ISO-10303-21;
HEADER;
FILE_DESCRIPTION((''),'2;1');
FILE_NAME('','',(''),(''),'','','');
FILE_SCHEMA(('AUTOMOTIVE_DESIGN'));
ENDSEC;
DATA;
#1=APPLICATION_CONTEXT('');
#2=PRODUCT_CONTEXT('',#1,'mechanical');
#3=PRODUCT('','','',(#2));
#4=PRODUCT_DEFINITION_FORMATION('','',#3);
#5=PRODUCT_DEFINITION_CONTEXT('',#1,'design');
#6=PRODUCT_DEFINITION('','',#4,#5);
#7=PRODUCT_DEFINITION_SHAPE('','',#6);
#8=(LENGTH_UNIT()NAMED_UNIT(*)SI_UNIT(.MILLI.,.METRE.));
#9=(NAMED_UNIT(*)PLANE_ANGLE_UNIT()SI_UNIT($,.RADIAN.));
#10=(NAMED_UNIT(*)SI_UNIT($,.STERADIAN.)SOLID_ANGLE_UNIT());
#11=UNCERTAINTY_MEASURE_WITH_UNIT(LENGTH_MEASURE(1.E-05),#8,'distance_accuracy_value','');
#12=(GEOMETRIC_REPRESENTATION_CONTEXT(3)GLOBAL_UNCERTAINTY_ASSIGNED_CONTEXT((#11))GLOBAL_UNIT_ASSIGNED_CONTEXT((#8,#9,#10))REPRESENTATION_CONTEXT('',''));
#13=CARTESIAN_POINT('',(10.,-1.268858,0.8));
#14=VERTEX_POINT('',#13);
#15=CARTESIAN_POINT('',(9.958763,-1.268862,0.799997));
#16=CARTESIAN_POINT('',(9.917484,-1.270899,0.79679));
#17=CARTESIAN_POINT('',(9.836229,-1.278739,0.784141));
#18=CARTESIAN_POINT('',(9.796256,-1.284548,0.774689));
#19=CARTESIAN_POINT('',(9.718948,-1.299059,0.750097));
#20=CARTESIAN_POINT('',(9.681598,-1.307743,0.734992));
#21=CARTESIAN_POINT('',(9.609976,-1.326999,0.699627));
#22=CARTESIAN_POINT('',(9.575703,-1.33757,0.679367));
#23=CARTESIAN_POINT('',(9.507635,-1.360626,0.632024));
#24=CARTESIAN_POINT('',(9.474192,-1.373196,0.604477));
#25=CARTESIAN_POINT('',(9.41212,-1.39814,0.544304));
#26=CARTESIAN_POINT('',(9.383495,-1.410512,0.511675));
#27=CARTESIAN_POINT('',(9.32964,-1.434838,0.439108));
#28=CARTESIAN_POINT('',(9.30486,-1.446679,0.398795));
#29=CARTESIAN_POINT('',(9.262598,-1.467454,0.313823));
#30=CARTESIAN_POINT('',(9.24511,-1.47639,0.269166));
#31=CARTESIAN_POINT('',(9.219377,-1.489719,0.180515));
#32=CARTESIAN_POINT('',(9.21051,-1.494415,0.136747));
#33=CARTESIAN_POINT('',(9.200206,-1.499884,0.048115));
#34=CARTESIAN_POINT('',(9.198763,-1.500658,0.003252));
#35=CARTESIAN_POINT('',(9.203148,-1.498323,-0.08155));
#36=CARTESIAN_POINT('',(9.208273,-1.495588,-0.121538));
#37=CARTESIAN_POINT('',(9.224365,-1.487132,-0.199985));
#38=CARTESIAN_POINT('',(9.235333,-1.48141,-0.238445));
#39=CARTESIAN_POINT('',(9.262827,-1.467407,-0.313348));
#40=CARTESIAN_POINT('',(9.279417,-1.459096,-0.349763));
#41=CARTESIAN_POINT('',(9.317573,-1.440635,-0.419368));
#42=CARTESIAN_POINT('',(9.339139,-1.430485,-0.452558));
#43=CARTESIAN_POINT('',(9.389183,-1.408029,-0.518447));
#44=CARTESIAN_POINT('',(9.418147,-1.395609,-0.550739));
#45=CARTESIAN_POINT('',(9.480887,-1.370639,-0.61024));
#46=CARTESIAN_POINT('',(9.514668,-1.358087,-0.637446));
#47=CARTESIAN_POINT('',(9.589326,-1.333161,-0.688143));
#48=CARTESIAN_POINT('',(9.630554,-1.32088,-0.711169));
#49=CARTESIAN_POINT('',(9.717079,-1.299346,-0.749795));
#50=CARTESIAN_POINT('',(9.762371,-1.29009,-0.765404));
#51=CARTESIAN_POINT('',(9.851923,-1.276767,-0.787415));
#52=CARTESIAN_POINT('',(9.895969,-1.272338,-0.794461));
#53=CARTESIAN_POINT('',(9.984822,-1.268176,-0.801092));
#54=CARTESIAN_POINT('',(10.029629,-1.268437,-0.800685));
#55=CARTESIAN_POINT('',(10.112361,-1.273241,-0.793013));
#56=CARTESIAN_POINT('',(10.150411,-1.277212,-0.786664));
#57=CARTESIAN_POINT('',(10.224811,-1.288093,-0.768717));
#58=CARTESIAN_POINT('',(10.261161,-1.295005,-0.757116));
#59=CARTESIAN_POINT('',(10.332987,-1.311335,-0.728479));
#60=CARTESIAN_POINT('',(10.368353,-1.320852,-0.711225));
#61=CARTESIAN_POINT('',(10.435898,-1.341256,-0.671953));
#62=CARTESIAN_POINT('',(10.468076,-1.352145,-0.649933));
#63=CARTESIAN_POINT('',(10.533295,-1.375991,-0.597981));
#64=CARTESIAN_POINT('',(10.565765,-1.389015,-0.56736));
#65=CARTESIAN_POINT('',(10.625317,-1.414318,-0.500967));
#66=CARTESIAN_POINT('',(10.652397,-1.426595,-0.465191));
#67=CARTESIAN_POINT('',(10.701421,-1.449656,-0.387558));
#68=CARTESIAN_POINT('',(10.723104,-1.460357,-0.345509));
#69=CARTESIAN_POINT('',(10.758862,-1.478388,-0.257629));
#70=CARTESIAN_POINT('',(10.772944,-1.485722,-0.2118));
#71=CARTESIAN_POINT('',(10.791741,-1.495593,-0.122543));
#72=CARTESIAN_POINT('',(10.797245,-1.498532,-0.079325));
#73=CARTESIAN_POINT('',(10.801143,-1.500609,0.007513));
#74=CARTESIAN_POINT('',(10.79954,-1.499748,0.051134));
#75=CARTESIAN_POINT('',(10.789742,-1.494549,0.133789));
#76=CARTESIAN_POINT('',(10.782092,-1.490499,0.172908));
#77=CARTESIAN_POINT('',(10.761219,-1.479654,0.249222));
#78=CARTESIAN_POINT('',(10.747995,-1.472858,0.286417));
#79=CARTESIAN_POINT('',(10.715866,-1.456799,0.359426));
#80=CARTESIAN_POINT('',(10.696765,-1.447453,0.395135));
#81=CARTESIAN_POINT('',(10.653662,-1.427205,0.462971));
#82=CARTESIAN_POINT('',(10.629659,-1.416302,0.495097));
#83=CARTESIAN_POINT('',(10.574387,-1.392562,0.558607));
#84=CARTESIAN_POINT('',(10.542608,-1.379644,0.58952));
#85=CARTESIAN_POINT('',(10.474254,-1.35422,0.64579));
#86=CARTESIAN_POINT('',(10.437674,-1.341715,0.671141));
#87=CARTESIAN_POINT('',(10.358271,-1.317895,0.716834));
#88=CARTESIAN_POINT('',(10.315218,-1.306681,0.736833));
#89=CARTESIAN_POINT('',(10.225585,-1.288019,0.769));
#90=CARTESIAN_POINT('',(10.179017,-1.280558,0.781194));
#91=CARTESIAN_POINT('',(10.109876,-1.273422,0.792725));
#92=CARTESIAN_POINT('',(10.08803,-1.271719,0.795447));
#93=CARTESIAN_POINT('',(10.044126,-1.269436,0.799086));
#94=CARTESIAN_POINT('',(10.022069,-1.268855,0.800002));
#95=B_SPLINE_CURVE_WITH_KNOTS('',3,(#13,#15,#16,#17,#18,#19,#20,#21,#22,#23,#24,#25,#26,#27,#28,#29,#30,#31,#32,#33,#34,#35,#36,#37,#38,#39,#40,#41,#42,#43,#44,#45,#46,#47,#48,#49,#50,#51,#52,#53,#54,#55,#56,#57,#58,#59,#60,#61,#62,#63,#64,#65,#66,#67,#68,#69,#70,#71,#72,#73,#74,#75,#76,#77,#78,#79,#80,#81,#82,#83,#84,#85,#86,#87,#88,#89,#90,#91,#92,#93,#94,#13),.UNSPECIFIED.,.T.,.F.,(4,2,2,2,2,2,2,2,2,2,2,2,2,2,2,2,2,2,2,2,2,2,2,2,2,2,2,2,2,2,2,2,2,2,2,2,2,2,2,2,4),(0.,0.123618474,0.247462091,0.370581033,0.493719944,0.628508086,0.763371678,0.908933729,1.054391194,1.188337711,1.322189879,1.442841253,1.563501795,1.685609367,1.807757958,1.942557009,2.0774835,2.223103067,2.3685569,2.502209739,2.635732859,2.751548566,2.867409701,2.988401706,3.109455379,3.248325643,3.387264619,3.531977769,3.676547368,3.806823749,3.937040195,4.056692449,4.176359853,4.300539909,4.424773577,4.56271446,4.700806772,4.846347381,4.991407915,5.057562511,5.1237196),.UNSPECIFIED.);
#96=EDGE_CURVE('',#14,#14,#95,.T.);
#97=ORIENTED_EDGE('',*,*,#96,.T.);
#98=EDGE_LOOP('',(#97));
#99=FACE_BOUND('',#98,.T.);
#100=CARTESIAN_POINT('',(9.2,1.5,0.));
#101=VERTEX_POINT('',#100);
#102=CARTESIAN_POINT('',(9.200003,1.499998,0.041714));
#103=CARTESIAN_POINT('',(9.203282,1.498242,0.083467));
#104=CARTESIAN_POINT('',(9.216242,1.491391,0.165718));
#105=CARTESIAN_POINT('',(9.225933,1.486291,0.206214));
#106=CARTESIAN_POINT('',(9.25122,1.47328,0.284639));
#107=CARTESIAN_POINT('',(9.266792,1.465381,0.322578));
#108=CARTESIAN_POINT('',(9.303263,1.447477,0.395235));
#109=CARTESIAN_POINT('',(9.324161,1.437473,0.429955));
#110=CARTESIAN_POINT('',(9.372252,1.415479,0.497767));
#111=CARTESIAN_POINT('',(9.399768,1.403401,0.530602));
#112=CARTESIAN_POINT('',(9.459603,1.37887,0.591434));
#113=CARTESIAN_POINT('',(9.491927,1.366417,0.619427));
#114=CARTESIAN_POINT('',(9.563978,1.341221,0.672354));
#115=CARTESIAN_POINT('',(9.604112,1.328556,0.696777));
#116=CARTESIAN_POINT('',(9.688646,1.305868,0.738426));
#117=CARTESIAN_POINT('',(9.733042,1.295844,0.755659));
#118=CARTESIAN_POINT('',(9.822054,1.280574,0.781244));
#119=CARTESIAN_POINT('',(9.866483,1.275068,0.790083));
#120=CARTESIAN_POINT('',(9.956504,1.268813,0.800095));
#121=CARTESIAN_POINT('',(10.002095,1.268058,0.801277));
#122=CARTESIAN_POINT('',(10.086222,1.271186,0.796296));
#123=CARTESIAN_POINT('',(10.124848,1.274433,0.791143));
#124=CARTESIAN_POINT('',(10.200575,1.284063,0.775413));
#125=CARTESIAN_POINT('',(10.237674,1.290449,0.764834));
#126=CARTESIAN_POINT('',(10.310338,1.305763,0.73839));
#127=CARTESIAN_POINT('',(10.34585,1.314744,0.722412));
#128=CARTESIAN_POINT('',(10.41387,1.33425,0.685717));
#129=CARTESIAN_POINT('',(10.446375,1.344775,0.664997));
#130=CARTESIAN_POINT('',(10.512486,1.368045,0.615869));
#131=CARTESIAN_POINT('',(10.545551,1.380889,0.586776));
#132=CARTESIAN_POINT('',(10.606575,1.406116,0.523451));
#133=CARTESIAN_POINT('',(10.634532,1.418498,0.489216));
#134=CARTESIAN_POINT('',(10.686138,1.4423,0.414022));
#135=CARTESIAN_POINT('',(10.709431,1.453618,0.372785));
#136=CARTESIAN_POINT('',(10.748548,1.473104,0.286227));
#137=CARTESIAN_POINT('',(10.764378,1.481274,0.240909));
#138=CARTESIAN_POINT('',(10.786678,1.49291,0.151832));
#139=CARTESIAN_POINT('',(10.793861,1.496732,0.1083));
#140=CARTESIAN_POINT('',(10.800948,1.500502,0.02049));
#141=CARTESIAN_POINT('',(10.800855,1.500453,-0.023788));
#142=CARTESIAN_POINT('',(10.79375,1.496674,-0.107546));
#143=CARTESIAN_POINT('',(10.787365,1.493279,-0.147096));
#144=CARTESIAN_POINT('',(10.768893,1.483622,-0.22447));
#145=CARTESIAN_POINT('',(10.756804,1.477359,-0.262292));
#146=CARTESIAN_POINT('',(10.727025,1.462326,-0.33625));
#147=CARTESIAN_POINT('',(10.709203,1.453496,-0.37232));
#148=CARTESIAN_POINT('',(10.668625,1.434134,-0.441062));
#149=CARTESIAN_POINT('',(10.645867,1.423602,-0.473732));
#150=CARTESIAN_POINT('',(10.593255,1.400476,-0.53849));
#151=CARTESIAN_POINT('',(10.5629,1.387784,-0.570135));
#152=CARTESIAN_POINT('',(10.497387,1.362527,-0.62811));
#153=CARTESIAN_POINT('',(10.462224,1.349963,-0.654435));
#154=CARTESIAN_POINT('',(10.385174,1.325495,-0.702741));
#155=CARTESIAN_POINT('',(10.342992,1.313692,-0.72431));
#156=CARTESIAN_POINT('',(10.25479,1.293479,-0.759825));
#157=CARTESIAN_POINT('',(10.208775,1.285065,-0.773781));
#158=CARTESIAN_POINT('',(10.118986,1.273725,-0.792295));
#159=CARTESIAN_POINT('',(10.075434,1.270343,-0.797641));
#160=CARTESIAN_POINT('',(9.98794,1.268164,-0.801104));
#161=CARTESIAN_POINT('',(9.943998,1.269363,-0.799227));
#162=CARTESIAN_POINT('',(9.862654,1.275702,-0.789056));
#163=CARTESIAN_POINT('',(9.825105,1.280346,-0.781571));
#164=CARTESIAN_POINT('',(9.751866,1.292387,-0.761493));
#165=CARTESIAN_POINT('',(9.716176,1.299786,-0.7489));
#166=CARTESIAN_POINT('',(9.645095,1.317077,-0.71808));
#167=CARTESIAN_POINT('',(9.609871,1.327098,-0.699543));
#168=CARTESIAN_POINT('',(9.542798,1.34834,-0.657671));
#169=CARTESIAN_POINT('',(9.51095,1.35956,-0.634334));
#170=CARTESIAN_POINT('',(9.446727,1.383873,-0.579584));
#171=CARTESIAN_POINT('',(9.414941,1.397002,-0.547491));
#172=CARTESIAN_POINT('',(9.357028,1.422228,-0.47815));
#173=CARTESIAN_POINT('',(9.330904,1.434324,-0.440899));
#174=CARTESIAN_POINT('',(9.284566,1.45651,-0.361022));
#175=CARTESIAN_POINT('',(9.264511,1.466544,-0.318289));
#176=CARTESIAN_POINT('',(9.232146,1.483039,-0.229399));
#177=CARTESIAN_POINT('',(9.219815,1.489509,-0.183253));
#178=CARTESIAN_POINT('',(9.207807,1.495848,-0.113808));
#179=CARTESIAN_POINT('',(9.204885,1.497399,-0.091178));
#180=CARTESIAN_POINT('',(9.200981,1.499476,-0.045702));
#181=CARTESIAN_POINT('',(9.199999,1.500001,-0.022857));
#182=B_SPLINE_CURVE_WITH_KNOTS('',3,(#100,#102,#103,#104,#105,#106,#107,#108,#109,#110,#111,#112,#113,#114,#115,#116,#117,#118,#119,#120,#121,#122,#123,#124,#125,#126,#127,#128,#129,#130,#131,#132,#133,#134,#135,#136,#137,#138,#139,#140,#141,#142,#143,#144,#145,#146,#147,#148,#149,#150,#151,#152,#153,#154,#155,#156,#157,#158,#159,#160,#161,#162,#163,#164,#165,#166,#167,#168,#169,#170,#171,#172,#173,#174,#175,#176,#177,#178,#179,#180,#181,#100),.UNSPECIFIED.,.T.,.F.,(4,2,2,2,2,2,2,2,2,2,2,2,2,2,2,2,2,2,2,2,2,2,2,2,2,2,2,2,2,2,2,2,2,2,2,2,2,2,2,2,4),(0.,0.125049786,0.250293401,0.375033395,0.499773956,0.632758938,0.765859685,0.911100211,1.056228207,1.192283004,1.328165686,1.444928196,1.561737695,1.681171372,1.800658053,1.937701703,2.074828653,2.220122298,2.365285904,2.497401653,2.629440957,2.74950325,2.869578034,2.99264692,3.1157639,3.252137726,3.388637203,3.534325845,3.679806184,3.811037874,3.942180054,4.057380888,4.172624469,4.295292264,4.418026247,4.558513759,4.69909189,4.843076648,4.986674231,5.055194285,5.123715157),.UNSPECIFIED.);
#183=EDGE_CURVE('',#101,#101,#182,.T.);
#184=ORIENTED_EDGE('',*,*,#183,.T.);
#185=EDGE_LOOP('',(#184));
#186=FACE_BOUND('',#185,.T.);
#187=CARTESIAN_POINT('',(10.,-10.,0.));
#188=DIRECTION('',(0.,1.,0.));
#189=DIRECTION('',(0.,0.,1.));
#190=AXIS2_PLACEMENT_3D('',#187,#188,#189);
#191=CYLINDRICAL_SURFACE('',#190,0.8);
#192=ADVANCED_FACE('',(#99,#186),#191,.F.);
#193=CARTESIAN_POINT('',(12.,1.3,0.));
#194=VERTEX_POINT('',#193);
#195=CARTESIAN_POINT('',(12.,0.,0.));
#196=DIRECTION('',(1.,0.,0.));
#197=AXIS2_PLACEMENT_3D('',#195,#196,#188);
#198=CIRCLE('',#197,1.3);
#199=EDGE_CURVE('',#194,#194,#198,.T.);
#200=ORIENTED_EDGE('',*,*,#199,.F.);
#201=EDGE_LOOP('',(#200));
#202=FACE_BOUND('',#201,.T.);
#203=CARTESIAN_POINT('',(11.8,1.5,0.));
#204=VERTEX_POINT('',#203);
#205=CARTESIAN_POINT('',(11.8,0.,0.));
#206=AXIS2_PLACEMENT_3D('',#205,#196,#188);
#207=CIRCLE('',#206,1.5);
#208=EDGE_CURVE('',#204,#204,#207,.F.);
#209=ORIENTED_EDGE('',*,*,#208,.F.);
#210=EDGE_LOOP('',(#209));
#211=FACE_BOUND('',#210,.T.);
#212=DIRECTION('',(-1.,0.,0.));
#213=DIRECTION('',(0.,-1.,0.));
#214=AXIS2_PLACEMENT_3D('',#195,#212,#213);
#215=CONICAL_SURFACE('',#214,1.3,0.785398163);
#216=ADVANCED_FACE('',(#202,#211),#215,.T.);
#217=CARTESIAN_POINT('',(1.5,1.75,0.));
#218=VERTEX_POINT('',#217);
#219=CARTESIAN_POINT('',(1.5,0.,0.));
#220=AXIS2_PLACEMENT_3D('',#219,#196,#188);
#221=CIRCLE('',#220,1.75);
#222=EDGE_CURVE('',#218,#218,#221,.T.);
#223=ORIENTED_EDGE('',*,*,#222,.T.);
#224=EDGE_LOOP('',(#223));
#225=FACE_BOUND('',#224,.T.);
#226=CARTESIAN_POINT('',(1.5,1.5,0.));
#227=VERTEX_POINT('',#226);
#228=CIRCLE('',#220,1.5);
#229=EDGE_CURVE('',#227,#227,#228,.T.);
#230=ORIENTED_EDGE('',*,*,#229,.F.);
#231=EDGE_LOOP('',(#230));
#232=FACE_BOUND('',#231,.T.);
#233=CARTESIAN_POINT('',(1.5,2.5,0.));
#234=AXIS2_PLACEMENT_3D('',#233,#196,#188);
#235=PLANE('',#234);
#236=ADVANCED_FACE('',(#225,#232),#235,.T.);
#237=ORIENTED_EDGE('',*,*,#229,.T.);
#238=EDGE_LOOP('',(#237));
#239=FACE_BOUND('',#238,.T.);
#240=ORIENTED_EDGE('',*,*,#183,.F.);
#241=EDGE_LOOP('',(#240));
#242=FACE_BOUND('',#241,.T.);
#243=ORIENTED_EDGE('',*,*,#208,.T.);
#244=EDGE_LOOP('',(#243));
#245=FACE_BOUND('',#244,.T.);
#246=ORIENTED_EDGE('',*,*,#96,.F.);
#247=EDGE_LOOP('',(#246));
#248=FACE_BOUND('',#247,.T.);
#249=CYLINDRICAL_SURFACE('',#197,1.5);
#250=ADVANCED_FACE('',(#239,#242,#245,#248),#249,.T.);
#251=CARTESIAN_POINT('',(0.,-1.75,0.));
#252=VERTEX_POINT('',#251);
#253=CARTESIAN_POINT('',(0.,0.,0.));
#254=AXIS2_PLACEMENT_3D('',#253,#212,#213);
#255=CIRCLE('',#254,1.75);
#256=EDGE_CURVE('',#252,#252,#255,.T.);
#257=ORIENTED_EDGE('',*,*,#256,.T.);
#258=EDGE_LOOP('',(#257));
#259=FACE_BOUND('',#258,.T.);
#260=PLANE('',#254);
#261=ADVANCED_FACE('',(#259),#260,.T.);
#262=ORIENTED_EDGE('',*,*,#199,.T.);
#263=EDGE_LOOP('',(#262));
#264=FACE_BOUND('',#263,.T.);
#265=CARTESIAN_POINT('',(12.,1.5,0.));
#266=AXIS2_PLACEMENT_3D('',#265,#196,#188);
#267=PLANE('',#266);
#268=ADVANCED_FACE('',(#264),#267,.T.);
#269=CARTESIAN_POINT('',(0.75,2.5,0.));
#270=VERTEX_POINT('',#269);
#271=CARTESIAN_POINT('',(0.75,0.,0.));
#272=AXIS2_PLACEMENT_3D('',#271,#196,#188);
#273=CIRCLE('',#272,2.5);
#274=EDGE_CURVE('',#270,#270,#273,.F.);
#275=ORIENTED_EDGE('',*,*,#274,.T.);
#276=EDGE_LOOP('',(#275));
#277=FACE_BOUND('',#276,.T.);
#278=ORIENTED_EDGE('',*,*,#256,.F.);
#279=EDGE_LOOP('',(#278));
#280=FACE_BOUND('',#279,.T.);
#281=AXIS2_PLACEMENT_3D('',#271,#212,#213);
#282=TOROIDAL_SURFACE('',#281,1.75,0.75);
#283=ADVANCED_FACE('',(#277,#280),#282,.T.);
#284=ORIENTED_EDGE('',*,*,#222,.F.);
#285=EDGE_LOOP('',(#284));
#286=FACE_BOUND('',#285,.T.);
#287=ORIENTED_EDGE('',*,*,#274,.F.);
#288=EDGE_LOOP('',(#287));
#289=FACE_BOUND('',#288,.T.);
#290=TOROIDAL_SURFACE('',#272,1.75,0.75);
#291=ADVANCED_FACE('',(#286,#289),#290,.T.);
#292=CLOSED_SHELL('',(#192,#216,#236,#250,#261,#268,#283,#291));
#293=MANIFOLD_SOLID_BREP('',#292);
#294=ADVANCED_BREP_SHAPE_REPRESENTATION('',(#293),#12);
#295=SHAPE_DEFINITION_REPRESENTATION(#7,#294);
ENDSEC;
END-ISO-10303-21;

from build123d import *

# Parameters (mm, degrees)
SKETCH_2_R          = 0.8
CUT_EXTRUDE_1_DEPTH = 10
CHAMFER_1_SIZE      = 0.2
FILLET_1_R          = 0.75


with BuildPart() as part:
    # 草图1 → 旋转1 (revolve)
    with BuildSketch(Plane.XY):
        Polygon((0, 0), (0, 2.5), (1.5, 2.5), (1.5, 1.5), (12, 1.5), (12, 0), align=None)
    revolve(axis=Axis((12, 0, 0), (-1, 0, 0)))

    # 草图2 → 切除-拉伸1 (cut, symmetric)
    with BuildSketch(Plane(origin=(0, 0, 0), x_dir=(1, 0, 0), z_dir=(0, 1, 0))):
        with Locations(Location((10, 0, 0), (0, 0, 270))):
            Circle(SKETCH_2_R)
    extrude(amount=CUT_EXTRUDE_1_DEPTH, both=True, mode=Mode.SUBTRACT)

    # 倒角1
    chamfer_1_edges = [part.edges().sort_by_distance(p)[0] for p in [
        (12, -1.5, 0),
    ]]
    chamfer(chamfer_1_edges, length=CHAMFER_1_SIZE)

    # 圆角1
    fillet_1_edges = [part.edges().sort_by_distance(p)[0] for p in [
        (1.5, -2.5, 0),
        (0, -2.5, 0),
    ]]
    fillet(fillet_1_edges, radius=FILLET_1_R - 0.0001)  # a hair under: the kernel refuses the full size


solid = part.part
